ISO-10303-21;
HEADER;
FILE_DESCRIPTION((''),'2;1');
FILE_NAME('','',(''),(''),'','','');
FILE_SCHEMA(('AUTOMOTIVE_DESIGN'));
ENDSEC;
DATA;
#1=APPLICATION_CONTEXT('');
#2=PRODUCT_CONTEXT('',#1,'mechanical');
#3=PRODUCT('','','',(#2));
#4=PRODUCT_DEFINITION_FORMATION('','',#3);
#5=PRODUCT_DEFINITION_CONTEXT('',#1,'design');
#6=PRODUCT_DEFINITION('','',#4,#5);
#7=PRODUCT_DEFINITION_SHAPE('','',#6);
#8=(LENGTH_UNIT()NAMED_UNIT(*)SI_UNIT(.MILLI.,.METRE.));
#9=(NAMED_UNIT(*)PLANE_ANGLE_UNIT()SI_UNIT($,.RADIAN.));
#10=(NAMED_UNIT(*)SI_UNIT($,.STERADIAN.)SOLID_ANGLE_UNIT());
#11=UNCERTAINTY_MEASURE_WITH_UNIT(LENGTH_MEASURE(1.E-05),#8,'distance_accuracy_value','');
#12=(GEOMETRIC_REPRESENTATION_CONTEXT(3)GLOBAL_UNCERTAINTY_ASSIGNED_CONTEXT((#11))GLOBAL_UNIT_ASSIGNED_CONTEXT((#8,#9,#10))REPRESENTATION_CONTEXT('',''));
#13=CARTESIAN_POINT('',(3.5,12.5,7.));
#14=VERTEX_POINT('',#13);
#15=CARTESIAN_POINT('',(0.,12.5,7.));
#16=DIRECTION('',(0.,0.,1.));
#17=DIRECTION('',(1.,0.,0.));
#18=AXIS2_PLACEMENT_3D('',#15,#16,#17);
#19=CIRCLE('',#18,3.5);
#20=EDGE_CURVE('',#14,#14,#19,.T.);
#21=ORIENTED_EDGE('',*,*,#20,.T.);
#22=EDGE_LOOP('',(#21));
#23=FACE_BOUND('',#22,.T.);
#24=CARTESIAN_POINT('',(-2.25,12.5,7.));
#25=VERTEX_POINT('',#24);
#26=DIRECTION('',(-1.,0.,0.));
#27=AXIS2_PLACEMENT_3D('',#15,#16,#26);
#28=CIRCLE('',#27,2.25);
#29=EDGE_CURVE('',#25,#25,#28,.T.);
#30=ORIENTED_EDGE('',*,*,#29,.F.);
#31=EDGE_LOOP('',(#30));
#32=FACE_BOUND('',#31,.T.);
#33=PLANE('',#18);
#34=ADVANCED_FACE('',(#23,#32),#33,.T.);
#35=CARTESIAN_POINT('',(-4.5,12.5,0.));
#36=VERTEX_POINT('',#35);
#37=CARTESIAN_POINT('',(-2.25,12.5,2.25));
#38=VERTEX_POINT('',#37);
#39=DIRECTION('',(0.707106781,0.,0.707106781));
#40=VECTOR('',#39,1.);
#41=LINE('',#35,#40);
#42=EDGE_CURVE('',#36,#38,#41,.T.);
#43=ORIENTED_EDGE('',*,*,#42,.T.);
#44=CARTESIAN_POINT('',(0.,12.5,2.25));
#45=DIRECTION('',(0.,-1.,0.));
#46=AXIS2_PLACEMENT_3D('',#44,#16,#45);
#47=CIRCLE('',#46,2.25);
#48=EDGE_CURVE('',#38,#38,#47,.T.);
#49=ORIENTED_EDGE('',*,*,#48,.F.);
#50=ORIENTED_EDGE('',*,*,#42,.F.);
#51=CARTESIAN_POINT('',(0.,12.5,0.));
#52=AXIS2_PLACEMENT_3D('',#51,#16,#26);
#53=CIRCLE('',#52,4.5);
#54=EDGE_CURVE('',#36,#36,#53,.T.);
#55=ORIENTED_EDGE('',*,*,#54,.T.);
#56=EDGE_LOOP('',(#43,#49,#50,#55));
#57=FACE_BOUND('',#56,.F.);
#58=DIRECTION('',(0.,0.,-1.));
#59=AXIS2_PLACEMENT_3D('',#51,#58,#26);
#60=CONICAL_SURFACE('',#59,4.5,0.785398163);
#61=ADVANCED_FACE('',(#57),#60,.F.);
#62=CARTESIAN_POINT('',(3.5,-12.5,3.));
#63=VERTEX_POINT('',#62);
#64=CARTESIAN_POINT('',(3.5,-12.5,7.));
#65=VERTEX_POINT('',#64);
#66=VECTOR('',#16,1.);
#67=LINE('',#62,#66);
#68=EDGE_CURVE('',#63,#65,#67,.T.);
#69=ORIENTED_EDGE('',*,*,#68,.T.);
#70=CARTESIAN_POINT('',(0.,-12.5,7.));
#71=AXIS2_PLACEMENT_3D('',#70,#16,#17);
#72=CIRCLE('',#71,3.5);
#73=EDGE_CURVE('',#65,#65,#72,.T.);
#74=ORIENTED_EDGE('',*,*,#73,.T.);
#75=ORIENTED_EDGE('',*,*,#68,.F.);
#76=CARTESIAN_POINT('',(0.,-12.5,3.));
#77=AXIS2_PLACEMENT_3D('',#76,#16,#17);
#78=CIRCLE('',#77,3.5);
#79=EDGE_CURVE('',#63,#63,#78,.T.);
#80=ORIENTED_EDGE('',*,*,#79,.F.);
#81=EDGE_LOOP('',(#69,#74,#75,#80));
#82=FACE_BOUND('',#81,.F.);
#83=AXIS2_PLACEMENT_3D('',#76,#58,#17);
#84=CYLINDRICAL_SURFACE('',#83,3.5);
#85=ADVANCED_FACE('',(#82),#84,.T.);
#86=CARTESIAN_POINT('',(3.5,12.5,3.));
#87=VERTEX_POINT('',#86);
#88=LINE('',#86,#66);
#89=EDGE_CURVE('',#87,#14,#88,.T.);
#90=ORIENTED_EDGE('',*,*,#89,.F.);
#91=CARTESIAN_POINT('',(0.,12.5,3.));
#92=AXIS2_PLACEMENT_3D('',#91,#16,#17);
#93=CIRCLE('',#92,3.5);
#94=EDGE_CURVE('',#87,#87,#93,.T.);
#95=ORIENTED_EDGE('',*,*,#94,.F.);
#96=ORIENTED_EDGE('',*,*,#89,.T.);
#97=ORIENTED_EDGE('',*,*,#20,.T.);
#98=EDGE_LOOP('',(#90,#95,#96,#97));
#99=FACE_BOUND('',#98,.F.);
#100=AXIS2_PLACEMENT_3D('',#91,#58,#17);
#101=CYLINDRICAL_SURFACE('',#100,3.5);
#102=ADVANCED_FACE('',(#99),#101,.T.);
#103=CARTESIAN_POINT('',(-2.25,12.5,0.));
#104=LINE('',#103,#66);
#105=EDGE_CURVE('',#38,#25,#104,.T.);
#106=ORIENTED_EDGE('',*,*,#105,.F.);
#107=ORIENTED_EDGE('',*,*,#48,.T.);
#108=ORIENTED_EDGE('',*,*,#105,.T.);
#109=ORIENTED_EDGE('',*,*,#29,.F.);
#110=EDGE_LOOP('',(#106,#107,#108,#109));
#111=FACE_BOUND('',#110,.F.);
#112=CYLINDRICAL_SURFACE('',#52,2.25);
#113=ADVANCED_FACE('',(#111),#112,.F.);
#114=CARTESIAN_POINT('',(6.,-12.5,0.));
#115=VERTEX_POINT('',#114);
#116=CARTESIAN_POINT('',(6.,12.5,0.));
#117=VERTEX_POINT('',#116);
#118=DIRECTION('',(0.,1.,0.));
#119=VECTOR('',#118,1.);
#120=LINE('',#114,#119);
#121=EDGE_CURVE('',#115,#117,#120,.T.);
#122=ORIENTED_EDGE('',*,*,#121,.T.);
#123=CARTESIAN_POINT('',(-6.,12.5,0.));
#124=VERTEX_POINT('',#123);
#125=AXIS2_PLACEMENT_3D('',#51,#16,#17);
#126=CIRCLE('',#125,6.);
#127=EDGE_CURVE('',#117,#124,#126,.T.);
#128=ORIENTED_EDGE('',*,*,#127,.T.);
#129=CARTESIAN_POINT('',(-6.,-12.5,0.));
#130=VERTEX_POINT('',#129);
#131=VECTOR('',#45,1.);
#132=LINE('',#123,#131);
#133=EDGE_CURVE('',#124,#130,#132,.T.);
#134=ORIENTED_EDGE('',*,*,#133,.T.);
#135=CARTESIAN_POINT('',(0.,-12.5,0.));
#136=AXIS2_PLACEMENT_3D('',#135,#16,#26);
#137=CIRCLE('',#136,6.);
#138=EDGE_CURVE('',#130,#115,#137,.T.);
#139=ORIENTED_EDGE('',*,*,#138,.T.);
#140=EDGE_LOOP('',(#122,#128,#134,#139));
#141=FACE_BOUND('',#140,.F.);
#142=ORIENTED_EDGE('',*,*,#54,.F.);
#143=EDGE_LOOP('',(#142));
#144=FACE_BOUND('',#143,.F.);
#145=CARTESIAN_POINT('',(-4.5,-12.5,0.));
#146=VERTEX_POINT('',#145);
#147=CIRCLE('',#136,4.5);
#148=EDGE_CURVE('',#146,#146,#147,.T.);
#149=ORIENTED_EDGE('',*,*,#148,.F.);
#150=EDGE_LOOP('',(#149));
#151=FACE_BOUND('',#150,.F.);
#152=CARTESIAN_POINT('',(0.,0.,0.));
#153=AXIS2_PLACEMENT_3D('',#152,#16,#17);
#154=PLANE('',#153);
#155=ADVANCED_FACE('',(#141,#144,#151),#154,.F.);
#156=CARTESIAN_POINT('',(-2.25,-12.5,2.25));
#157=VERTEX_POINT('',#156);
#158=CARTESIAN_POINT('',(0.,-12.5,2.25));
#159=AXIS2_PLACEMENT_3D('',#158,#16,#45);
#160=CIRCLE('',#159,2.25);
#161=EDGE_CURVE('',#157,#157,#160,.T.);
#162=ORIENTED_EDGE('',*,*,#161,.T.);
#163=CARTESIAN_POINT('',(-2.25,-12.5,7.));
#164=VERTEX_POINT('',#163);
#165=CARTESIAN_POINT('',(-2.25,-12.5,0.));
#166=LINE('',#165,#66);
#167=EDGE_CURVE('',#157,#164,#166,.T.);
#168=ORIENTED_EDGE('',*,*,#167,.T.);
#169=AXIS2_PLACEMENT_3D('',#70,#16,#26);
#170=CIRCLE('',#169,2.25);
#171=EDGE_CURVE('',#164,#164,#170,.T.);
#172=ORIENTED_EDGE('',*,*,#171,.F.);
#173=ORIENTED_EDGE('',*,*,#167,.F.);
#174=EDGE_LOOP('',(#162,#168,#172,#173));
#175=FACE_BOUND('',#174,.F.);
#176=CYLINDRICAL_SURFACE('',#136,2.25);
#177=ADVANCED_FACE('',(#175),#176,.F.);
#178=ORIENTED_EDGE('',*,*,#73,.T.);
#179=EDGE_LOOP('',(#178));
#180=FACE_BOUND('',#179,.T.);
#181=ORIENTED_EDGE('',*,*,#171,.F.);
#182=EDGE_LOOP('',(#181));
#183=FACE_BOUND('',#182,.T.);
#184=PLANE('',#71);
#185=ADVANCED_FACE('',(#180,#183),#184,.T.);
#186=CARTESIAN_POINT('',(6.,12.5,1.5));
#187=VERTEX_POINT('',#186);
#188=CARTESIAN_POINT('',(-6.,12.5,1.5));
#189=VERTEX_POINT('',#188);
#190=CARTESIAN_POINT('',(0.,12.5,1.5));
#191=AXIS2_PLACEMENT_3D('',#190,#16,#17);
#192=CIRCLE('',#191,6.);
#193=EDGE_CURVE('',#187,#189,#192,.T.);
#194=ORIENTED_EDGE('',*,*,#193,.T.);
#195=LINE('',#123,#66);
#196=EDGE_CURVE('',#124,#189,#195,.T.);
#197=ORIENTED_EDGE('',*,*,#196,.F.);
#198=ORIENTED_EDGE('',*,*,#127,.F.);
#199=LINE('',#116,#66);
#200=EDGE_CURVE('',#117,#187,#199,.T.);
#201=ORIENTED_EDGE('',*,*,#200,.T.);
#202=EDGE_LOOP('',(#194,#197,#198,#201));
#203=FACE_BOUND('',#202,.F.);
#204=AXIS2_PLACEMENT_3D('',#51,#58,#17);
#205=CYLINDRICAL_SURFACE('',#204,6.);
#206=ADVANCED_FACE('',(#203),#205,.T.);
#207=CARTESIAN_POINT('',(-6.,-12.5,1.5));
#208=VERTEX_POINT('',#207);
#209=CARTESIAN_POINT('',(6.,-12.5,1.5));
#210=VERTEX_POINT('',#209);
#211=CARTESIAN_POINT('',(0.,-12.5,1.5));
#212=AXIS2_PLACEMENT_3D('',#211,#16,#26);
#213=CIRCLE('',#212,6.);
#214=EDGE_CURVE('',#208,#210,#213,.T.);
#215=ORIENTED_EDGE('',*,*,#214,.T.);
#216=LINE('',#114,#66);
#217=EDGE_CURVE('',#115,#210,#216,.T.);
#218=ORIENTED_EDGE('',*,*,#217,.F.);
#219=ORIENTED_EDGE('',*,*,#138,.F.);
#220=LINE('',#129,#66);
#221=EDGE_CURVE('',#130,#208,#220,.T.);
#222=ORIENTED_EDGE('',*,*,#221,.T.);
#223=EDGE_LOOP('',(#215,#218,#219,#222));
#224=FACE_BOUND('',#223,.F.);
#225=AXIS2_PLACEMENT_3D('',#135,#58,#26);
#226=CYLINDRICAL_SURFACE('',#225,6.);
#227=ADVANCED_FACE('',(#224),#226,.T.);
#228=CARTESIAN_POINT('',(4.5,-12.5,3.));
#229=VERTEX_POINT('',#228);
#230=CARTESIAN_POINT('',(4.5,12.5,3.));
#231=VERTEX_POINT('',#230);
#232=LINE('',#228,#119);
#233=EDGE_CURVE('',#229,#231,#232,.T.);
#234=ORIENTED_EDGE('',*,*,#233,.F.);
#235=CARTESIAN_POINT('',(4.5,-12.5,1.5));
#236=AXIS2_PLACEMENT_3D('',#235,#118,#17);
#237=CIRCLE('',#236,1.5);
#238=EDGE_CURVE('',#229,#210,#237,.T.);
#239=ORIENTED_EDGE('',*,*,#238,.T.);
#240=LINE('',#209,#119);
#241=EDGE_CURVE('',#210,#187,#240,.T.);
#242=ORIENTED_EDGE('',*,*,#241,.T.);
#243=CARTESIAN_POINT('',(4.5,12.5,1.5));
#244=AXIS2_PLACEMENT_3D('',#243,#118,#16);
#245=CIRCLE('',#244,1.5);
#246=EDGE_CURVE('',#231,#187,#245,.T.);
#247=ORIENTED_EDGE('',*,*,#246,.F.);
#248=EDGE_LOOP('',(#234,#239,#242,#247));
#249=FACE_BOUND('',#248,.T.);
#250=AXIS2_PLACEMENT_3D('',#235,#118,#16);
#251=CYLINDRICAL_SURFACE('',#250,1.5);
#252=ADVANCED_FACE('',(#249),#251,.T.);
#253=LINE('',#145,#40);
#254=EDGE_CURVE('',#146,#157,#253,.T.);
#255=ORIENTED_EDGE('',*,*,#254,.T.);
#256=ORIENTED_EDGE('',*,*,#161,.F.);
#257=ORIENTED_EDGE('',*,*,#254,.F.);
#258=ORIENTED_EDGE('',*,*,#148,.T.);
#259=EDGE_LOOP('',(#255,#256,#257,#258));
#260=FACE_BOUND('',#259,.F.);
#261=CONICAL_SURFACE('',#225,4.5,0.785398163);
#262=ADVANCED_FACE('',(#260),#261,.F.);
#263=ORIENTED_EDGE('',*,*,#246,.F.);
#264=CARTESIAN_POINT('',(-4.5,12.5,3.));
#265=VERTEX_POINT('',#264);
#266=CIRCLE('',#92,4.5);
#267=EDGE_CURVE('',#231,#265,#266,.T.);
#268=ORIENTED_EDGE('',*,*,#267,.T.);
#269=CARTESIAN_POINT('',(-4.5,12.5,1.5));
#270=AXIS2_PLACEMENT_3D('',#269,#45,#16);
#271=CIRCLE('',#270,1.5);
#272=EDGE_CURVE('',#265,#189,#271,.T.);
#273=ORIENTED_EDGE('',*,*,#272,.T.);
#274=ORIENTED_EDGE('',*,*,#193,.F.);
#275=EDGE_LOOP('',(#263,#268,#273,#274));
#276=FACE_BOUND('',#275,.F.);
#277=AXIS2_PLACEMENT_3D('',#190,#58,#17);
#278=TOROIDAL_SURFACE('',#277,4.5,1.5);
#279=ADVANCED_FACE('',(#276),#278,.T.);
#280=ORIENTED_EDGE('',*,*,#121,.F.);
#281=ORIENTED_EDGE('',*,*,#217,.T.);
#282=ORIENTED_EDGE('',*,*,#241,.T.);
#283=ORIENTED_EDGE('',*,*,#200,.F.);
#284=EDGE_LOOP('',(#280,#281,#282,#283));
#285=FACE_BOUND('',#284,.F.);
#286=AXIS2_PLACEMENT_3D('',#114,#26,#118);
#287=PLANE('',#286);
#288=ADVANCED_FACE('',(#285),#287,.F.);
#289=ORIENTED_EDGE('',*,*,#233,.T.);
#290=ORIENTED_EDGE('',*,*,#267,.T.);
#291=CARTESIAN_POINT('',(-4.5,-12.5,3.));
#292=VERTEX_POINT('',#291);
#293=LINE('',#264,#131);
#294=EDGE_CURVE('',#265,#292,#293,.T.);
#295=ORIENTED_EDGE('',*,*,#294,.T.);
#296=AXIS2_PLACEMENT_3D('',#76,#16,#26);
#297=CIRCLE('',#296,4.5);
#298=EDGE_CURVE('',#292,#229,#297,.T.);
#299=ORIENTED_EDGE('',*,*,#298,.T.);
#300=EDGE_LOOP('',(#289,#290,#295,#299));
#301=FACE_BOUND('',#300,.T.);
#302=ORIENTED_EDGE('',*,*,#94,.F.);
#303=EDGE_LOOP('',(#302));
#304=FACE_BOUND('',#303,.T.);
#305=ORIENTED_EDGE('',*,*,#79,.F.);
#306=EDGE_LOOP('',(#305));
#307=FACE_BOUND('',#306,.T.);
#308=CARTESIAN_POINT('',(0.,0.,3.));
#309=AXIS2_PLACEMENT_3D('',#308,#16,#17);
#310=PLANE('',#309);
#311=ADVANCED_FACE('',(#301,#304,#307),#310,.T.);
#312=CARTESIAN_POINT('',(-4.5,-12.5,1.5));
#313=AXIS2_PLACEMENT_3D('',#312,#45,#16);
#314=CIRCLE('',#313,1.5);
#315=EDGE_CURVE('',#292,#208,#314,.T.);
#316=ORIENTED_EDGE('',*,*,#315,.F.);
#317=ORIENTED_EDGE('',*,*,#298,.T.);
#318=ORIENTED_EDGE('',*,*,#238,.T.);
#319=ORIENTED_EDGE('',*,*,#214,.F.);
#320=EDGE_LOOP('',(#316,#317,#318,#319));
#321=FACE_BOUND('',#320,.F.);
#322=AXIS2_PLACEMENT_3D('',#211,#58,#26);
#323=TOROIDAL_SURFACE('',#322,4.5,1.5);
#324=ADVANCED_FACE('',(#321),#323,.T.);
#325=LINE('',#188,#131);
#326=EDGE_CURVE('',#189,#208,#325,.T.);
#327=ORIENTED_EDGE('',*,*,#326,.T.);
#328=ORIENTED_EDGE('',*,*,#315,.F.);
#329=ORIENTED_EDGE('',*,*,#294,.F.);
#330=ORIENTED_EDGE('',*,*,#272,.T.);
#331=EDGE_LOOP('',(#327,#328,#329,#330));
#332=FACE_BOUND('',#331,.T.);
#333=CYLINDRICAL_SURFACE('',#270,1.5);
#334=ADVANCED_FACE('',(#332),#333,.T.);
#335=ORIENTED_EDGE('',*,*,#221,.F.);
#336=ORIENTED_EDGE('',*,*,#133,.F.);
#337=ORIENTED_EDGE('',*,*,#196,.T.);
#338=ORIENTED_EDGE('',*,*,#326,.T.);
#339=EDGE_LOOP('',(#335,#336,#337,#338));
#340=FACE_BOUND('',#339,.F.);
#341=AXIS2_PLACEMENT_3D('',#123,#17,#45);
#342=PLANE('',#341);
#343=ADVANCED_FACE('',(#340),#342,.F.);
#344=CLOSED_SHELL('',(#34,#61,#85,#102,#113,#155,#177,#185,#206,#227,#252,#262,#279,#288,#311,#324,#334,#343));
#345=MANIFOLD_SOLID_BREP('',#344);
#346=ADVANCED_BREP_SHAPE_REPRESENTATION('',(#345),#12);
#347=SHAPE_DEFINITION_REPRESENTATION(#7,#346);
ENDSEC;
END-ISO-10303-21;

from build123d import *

# Parameters (mm, degrees)
F1_DEPTH       = 3
F2_R           = 3.5
F3_DEPTH       = 4
F5_D           = 4.5
F5_CSINK_D     = 9
F5_CSINK_ANGLE = 90
F6_R           = 1.5


# Not quite as in the source:
# - a feature names something its author has since deleted; it is built from what else it names


with BuildPart() as f1:
    # F0 (on Top) → F1 (new body)
    with BuildSketch(Plane.XY):
        with BuildLine():
            ThreePointArc((6, 12.5), (0, 18.5), (-6, 12.5))
            Line((-6, 12.5), (-6, -12.5))
            ThreePointArc((-6, -12.5), (0, -18.5), (6, -12.5))
            Line((6, -12.5), (6, 12.5))
        make_face()
    extrude(amount=F1_DEPTH)

    # F2 (on face) → F3 (join)
    with BuildSketch(Plane.XY.offset(3)):
        with Locations((0, -12.5)):
            Circle(F2_R)
        with Locations((0, 12.5)):
            Circle(F2_R)
    extrude(amount=F3_DEPTH)

    # F5 (through all)
    with Locations(Plane(origin=(0, 0, 0), x_dir=(1, 0, 0), z_dir=(0, 0, -1))):
        with Locations((0, 12.5), (0, -12.5)):
            CounterSinkHole(F5_D / 2, F5_CSINK_D / 2, counter_sink_angle=F5_CSINK_ANGLE)

    # F6
    f6_edges = [f1.edges().sort_by_distance(p)[0] for p in [
        (-6, 0, 3),
    ]]
    fillet(f6_edges, radius=F6_R)


solid = f1.part
